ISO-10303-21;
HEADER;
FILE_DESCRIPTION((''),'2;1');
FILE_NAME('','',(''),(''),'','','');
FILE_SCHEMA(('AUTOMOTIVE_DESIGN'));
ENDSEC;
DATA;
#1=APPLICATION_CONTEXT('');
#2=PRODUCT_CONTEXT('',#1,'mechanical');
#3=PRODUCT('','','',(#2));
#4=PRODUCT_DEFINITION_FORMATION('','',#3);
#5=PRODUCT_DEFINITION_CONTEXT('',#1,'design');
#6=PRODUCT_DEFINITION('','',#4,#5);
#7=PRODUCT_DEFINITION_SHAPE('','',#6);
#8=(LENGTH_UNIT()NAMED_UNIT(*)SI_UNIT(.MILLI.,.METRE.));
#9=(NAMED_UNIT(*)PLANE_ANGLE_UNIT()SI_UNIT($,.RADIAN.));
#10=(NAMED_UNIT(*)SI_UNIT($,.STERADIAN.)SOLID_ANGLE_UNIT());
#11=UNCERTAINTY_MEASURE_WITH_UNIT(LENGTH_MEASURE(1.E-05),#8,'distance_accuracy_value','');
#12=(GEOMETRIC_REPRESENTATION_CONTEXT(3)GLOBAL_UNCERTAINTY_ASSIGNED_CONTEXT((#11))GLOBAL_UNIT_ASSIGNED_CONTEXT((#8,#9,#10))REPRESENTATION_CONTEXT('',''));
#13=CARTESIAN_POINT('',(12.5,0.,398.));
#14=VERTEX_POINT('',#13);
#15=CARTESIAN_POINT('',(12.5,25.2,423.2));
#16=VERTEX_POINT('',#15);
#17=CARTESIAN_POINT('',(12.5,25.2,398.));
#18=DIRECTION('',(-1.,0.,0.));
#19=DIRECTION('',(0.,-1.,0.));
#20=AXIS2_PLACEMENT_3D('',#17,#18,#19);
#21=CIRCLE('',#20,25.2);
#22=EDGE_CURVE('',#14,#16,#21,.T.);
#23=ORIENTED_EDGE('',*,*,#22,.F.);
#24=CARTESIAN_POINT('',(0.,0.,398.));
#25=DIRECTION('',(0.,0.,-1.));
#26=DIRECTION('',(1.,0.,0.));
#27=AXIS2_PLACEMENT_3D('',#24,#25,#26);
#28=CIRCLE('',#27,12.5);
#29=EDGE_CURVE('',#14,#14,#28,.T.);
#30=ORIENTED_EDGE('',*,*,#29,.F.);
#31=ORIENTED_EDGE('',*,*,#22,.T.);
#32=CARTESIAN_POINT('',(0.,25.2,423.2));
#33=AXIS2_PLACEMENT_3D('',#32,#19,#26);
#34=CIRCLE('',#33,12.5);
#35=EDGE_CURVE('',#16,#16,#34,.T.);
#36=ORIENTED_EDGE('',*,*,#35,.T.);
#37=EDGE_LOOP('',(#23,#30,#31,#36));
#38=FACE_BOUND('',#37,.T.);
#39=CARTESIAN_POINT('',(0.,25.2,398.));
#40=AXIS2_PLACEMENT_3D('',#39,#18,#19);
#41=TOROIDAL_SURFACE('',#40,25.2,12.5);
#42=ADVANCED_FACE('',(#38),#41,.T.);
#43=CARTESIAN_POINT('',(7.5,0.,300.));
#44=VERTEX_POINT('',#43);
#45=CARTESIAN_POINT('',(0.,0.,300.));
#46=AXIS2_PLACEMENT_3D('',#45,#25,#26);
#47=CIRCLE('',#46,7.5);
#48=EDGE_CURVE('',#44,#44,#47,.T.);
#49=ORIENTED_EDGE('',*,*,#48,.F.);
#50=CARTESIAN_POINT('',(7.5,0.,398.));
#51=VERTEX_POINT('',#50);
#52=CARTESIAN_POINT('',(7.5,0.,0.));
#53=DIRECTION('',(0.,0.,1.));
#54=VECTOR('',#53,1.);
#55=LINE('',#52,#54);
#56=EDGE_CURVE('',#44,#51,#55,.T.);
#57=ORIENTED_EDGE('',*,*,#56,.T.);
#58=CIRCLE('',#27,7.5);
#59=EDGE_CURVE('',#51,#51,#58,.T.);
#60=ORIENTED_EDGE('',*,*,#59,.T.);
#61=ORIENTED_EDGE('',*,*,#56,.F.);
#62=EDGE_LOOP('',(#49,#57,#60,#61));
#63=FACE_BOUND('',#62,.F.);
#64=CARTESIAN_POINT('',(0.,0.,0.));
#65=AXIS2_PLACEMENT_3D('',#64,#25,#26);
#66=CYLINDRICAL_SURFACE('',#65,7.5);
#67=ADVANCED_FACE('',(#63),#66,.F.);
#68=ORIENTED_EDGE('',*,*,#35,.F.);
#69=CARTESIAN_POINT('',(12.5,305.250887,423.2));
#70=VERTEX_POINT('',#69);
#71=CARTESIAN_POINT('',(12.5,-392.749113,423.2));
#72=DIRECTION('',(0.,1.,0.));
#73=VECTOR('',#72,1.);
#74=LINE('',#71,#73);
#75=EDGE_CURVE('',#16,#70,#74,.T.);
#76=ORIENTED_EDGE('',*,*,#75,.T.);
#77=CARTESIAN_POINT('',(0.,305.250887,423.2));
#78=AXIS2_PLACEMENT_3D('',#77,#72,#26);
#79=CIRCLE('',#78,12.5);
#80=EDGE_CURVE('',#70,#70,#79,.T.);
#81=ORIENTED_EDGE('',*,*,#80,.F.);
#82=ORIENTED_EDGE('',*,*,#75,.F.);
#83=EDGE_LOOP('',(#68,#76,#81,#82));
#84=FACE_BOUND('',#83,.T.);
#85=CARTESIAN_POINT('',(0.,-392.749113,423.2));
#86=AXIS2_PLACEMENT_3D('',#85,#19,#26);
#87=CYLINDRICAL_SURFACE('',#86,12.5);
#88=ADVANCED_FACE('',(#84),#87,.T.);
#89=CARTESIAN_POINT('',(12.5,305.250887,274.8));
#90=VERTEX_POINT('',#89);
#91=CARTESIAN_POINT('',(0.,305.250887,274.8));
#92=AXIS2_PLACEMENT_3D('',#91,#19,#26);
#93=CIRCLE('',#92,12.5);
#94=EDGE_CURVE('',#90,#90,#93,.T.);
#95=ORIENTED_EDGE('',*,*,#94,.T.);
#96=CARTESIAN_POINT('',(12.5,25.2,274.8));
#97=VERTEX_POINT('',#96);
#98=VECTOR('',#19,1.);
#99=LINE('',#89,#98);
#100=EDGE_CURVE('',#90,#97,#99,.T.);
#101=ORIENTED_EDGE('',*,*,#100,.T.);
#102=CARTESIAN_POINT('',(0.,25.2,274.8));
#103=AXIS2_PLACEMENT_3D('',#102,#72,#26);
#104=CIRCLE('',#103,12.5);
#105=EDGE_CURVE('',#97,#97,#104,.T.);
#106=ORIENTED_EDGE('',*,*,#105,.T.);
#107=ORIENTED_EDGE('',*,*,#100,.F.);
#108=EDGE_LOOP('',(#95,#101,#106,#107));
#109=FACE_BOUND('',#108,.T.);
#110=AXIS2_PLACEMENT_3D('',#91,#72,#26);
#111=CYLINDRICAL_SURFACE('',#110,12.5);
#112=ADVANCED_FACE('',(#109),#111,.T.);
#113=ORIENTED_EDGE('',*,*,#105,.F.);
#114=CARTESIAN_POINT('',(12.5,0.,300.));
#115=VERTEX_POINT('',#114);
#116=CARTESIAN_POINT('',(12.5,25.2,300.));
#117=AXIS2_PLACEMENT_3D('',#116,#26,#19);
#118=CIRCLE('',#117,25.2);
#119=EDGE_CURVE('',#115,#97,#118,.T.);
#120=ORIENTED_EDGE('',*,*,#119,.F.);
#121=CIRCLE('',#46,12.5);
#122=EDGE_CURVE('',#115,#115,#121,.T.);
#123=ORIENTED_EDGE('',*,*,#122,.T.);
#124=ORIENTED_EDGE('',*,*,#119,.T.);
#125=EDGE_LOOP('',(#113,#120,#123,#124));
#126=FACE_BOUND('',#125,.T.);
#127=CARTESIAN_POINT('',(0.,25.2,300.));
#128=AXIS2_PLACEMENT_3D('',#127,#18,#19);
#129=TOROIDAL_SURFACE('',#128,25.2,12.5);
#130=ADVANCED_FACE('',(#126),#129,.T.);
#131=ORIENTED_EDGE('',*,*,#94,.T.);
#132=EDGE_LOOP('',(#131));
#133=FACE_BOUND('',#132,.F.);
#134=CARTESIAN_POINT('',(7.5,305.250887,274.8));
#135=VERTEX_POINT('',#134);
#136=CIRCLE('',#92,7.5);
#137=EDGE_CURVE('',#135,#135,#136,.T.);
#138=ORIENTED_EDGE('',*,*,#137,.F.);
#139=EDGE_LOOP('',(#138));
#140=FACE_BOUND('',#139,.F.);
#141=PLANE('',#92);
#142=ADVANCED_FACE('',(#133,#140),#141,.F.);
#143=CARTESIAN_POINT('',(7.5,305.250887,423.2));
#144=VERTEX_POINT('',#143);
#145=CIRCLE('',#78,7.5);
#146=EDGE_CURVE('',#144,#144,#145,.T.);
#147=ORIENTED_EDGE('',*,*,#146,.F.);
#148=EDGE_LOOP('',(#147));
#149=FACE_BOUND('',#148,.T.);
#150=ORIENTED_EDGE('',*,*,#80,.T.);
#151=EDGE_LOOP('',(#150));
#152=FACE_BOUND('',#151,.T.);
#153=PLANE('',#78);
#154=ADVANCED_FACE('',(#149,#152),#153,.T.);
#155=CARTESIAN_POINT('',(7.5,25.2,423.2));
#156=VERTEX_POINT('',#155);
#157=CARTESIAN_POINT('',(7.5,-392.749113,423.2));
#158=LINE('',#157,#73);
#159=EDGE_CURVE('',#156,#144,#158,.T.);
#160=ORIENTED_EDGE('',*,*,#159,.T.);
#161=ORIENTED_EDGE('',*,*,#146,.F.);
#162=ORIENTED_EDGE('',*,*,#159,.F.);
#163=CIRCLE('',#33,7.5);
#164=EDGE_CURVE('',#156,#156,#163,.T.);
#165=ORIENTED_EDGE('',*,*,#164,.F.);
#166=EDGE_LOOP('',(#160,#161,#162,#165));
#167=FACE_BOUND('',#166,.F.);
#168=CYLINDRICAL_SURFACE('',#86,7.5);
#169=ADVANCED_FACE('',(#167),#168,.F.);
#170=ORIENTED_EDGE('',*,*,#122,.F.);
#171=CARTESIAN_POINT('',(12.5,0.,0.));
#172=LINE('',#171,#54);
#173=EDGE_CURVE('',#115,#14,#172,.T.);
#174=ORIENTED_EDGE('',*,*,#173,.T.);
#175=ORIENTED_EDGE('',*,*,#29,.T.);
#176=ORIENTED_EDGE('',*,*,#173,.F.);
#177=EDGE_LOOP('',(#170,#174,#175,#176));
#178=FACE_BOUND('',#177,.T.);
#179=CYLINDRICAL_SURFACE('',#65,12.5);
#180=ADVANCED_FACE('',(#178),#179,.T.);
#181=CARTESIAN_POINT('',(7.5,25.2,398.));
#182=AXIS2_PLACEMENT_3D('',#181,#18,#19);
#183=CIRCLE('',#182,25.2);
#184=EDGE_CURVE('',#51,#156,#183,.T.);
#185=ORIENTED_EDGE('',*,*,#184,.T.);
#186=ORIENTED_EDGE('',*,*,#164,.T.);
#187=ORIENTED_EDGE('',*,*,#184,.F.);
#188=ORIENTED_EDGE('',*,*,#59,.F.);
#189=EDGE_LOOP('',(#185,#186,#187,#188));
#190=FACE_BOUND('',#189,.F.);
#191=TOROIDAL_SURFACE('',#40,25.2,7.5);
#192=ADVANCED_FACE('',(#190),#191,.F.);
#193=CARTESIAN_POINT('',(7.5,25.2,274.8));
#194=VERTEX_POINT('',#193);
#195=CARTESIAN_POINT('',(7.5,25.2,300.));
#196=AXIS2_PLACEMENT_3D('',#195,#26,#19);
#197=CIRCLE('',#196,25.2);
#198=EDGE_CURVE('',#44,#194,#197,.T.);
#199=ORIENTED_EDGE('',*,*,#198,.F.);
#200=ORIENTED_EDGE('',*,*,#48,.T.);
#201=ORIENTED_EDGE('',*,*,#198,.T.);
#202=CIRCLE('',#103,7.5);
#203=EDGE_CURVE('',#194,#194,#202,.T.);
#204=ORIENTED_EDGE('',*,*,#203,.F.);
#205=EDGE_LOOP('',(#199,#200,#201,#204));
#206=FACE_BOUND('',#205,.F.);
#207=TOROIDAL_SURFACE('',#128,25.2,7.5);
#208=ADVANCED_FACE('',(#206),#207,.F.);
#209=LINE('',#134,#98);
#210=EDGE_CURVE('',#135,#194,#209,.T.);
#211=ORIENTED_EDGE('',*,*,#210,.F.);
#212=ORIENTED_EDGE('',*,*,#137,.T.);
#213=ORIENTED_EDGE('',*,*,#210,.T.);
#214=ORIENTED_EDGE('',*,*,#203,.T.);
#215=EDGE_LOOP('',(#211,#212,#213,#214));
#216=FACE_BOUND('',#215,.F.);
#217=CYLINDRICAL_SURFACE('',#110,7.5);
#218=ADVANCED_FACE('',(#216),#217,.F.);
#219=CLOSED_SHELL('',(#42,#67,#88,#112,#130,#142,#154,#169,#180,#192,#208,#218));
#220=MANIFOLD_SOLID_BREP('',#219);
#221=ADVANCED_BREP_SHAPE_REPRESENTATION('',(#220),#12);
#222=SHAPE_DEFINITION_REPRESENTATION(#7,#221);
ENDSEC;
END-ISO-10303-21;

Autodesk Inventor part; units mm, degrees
ref_plane "YZ Plane" through (0, 0, 0) normal (1, 0, 0) x (0, 1, 0)
ref_plane "XY Plane" through (0, 0, 0) normal (0, 0, 1) x (1, 0, 0)
sketch "Sketch1" plane through (0, 0, 0) normal (0, 0, 1) x (1, 0, 0)
  circle A0 centre (0, 0) radius 7.5
  circle A1 centre (0, 0) radius 12.5
  dimension "d0" = 15
  dimension "d1" = 25
extrude "Extrusion1" add sketch "Sketch1" along normal blind 698
ref_plane "Work Plane2" through (0, 12.5, 0) normal (0, 1, 0) x (-1, 0, 0)
sketch "Sketch3" plane through (0, 12.5, 0) normal (0, 1, 0) x (-1, 0, 0)
  line L0 (219.2482, 398) -> (-262.0284, 398)
  line L1 (12.5, 698) -> (-12.5, 698) projected
  line L2 (351.4203, 300) -> (-288.0764, 300)
  line L3 (12.5, 0) -> (-12.5, 0) projected
  point P0 (0, 0)
  dimension "d7" = 300
  dimension "d8" = 300
bend part "Bend Part1" radius 12.7 angle 90 line through (-219.2482, 12.5, 398) along (1, 0, 0) centre toward (0, 1, 0) moving side (0, 0, 1) both sides no
sketch "Sketch4" plane through (0, 12.5, 0) normal (0, 1, 0) x (-1, 0, 0)
  line L0 (312.7899, 300) -> (-276.8847, 300)
  line L1 (12.5, 0) -> (-12.5, 0) projected
  point P0 (0, 0)
  dimension "d11" = 300
bend part "Bend Part2" radius 12.7 angle 90 line through (-312.7899, 12.5, 300) along (1, 0, 0) centre toward (0, 1, 0) moving side (0, 0, -1) both sides no
sketch "Sketch5" plane through (0, 305.2509, 423.2) normal (0, 1, 0) x (1, 0, 0)
  point P0 (0, 423.2)
properties part number "Seat Link"
